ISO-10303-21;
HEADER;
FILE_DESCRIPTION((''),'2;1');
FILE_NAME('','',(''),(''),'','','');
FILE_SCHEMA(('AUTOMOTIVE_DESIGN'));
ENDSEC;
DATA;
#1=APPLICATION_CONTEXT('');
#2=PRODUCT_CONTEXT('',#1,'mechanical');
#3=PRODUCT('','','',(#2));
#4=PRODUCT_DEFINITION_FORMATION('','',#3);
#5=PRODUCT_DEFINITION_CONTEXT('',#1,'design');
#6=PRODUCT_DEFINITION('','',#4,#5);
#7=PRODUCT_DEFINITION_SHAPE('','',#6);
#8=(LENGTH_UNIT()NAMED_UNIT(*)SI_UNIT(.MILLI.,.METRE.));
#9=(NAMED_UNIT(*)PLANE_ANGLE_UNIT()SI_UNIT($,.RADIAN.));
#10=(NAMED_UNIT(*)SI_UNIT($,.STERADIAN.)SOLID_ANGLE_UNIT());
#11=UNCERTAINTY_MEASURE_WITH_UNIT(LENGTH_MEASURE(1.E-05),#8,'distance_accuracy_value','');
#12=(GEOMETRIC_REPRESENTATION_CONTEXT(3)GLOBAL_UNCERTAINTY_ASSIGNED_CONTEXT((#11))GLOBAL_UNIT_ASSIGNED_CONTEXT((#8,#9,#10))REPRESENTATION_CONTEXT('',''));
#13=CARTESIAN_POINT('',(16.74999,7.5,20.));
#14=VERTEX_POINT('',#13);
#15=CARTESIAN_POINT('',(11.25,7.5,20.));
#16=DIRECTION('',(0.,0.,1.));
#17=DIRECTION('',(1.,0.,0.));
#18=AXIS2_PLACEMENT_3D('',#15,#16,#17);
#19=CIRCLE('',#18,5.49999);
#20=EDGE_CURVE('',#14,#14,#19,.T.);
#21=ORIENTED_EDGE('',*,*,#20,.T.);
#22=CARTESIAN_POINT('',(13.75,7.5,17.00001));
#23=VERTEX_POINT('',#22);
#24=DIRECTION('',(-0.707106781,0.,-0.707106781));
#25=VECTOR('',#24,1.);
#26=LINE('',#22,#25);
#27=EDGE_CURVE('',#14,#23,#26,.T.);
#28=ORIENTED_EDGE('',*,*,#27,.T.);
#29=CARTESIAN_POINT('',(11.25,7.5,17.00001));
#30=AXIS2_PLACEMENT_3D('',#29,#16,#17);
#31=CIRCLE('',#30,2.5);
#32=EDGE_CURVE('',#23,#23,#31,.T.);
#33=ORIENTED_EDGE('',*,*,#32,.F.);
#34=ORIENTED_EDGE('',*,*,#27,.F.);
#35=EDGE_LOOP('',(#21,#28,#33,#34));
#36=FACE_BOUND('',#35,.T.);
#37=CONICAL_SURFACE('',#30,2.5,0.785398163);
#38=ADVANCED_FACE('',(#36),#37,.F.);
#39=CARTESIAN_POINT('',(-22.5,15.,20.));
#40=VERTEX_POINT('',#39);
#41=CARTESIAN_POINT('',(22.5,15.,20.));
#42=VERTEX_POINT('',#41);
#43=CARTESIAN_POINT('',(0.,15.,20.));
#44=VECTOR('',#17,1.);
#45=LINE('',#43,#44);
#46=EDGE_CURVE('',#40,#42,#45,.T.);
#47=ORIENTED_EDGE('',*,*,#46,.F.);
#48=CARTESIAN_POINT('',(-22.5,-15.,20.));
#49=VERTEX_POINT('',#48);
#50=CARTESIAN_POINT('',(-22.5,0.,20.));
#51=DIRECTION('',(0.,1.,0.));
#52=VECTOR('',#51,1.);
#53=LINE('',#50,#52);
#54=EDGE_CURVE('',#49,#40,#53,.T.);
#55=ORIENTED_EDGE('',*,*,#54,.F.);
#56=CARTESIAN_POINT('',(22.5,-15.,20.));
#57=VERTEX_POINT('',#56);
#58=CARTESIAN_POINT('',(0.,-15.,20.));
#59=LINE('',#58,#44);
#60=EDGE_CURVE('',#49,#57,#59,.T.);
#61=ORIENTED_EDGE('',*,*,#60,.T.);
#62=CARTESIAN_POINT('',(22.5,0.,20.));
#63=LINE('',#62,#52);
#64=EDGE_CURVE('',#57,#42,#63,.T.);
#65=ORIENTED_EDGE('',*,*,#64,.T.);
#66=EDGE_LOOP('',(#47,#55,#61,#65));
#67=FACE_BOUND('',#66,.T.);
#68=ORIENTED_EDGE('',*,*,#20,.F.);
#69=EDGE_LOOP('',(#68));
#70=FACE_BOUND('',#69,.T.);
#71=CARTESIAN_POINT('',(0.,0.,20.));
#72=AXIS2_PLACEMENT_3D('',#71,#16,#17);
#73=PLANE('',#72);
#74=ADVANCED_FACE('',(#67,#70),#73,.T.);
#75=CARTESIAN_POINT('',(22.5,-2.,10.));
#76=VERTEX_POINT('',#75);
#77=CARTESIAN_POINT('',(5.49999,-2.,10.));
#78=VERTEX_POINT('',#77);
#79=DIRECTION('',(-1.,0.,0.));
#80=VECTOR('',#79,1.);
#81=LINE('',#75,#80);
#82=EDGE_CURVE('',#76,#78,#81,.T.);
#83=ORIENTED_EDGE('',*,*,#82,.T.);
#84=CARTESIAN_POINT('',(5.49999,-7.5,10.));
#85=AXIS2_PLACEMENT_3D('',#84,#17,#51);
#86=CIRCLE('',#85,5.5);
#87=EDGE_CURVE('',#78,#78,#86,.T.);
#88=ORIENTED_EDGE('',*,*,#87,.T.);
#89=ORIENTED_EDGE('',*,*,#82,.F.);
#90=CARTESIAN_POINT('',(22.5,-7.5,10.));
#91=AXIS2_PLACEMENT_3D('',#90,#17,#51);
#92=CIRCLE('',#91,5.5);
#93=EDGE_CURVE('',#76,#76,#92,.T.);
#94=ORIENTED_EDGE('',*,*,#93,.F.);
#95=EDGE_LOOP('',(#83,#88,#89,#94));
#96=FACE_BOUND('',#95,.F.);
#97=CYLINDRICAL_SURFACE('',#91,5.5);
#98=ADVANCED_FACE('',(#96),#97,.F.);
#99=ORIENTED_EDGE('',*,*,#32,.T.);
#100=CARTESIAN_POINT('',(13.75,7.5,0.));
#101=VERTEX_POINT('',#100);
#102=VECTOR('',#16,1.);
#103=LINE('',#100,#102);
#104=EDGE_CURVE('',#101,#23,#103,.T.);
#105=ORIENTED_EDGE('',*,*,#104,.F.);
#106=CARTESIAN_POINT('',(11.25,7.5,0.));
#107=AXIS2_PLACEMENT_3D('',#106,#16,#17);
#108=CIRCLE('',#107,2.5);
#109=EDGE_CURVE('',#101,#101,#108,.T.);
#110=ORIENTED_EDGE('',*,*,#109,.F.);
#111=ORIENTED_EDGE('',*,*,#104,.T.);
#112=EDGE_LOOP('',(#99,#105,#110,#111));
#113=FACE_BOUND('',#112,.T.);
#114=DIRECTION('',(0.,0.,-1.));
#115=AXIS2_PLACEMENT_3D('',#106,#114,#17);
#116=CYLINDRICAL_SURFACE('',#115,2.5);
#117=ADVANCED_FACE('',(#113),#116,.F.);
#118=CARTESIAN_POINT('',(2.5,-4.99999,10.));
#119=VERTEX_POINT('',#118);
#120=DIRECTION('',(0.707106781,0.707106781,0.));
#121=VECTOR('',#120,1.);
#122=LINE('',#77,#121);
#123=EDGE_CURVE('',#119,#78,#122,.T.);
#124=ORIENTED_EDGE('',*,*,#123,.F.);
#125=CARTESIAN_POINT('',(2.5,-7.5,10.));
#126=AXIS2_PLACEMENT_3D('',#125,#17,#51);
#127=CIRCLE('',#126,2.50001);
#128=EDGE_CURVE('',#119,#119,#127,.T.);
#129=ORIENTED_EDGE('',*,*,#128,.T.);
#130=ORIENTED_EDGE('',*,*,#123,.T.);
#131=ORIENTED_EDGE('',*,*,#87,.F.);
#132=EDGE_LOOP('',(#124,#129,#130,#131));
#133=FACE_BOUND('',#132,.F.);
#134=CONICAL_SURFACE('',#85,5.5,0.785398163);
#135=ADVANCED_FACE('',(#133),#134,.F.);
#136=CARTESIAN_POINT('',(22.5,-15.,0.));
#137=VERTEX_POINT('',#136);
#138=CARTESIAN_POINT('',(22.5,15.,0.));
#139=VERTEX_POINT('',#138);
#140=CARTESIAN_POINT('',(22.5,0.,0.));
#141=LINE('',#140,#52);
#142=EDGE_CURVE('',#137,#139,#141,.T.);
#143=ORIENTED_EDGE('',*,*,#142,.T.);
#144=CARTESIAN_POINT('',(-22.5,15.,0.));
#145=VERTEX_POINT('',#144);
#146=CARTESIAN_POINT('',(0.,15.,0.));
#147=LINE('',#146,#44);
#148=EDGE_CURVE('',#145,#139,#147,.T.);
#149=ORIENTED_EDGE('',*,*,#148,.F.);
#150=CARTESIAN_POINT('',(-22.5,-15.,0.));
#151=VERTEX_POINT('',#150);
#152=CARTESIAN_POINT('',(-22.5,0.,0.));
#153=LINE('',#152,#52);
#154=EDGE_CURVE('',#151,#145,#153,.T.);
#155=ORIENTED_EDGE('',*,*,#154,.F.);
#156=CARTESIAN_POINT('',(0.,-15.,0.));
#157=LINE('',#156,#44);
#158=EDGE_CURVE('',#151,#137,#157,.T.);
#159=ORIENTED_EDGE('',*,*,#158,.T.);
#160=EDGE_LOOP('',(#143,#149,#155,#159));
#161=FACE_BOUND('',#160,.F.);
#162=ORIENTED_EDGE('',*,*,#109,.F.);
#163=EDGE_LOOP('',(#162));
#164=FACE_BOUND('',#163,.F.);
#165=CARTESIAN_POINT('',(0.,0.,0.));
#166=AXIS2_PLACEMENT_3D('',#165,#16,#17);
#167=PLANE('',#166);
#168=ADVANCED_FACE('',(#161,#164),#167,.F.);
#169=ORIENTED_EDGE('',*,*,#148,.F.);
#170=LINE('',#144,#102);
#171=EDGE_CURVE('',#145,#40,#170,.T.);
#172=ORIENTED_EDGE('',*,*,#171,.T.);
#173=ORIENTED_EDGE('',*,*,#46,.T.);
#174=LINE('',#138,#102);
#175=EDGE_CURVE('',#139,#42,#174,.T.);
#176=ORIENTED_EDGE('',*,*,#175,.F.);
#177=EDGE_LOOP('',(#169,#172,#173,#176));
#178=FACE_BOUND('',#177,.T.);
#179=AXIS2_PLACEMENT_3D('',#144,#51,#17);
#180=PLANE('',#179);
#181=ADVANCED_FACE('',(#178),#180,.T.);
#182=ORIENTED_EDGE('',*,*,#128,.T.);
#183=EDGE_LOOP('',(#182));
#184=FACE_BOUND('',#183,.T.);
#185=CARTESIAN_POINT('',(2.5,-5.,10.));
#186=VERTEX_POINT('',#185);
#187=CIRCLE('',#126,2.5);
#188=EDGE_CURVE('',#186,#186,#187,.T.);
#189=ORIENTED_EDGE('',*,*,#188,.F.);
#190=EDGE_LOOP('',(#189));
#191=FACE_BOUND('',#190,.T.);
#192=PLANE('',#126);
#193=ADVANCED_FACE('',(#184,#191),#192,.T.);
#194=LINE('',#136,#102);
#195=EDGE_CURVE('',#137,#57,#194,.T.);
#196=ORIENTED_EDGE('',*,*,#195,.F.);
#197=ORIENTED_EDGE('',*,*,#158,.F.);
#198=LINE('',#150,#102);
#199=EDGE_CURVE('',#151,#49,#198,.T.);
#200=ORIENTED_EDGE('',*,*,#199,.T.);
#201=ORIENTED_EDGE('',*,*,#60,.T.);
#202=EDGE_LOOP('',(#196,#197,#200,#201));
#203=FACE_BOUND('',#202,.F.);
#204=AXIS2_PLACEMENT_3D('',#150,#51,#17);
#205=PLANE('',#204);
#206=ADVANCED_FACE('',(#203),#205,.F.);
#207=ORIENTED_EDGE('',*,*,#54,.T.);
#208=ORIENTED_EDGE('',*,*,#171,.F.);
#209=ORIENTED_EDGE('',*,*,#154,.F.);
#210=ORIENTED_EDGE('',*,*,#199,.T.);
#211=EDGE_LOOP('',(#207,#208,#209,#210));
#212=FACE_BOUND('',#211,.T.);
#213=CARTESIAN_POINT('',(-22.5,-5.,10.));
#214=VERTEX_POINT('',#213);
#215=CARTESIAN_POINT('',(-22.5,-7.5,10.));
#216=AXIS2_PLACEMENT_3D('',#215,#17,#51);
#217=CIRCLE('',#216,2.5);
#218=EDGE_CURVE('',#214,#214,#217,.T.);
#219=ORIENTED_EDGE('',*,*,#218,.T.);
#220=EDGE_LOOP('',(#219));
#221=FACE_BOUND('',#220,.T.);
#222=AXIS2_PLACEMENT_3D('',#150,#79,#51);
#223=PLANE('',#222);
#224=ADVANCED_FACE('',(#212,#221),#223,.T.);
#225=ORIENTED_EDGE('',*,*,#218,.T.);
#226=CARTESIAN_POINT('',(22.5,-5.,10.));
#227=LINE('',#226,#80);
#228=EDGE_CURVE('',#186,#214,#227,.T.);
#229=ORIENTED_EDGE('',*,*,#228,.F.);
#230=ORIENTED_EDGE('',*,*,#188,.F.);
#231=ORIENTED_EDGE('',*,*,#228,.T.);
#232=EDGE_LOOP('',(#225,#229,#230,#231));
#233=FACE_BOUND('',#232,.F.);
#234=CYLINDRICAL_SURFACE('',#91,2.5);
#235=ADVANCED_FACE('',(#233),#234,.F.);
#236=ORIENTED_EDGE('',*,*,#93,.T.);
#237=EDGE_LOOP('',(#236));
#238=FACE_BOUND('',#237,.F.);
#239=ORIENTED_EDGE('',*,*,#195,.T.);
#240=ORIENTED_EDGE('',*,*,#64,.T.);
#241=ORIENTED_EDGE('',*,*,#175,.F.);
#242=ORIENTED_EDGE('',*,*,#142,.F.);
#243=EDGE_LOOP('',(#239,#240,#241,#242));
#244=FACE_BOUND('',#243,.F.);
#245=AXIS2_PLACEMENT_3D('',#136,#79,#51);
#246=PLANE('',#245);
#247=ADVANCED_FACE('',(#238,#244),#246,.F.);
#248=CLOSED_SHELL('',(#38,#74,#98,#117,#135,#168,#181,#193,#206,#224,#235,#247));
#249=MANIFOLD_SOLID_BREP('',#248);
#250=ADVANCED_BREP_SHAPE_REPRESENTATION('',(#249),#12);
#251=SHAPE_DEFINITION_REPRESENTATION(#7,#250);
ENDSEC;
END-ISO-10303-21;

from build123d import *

# Parameters (mm, degrees)
F0_W     = 45
F0_H     = 30
F0_R     = 2.5
F1_DEPTH = 20
F2_R     = 2.5
F3_DEPTH = 45.001
F2_R_2   = 5.5
F4_DEPTH = 20
F5_SIZE  = 2.99999


# Not quite as in the source:
# - a fillet or chamfer is up to 0.001 mm smaller than in the source, because OpenCascade refuses the exact size


with BuildPart() as f1:
    # F0 (on Top) → F1 (new body)
    with BuildSketch(Plane.XY):
        Rectangle(F0_W, F0_H)
        with Locations((11.25, 7.5)):
            Circle(F0_R, mode=Mode.SUBTRACT)
    extrude(amount=F1_DEPTH)

    # F2 (on face) → F3 (cut, through all)
    with BuildSketch(Plane.YZ.offset(22.5)):
        with Locations((-7.5, 10)):
            Circle(F2_R)
    extrude(amount=-F3_DEPTH, mode=Mode.SUBTRACT)

    # F2 (on face) → F4 (cut)
    with BuildSketch(Plane.YZ.offset(22.5)):
        with Locations((-7.5, 10)):
            Circle(F2_R_2)
        with Locations((-7.5, 10)):
            Circle(F2_R, mode=Mode.SUBTRACT)
    extrude(amount=-F4_DEPTH, mode=Mode.SUBTRACT)

    # F5 (size 3 in the source; OpenCascade refuses exactly that, so slightly less here)
    f5_edges = [f1.edges().sort_by_distance(p)[0] for p in [
        (8.75, 7.5, 20),
        (2.5, -13, 10),
    ]]
    chamfer(f5_edges, length=F5_SIZE)


solid = f1.part
